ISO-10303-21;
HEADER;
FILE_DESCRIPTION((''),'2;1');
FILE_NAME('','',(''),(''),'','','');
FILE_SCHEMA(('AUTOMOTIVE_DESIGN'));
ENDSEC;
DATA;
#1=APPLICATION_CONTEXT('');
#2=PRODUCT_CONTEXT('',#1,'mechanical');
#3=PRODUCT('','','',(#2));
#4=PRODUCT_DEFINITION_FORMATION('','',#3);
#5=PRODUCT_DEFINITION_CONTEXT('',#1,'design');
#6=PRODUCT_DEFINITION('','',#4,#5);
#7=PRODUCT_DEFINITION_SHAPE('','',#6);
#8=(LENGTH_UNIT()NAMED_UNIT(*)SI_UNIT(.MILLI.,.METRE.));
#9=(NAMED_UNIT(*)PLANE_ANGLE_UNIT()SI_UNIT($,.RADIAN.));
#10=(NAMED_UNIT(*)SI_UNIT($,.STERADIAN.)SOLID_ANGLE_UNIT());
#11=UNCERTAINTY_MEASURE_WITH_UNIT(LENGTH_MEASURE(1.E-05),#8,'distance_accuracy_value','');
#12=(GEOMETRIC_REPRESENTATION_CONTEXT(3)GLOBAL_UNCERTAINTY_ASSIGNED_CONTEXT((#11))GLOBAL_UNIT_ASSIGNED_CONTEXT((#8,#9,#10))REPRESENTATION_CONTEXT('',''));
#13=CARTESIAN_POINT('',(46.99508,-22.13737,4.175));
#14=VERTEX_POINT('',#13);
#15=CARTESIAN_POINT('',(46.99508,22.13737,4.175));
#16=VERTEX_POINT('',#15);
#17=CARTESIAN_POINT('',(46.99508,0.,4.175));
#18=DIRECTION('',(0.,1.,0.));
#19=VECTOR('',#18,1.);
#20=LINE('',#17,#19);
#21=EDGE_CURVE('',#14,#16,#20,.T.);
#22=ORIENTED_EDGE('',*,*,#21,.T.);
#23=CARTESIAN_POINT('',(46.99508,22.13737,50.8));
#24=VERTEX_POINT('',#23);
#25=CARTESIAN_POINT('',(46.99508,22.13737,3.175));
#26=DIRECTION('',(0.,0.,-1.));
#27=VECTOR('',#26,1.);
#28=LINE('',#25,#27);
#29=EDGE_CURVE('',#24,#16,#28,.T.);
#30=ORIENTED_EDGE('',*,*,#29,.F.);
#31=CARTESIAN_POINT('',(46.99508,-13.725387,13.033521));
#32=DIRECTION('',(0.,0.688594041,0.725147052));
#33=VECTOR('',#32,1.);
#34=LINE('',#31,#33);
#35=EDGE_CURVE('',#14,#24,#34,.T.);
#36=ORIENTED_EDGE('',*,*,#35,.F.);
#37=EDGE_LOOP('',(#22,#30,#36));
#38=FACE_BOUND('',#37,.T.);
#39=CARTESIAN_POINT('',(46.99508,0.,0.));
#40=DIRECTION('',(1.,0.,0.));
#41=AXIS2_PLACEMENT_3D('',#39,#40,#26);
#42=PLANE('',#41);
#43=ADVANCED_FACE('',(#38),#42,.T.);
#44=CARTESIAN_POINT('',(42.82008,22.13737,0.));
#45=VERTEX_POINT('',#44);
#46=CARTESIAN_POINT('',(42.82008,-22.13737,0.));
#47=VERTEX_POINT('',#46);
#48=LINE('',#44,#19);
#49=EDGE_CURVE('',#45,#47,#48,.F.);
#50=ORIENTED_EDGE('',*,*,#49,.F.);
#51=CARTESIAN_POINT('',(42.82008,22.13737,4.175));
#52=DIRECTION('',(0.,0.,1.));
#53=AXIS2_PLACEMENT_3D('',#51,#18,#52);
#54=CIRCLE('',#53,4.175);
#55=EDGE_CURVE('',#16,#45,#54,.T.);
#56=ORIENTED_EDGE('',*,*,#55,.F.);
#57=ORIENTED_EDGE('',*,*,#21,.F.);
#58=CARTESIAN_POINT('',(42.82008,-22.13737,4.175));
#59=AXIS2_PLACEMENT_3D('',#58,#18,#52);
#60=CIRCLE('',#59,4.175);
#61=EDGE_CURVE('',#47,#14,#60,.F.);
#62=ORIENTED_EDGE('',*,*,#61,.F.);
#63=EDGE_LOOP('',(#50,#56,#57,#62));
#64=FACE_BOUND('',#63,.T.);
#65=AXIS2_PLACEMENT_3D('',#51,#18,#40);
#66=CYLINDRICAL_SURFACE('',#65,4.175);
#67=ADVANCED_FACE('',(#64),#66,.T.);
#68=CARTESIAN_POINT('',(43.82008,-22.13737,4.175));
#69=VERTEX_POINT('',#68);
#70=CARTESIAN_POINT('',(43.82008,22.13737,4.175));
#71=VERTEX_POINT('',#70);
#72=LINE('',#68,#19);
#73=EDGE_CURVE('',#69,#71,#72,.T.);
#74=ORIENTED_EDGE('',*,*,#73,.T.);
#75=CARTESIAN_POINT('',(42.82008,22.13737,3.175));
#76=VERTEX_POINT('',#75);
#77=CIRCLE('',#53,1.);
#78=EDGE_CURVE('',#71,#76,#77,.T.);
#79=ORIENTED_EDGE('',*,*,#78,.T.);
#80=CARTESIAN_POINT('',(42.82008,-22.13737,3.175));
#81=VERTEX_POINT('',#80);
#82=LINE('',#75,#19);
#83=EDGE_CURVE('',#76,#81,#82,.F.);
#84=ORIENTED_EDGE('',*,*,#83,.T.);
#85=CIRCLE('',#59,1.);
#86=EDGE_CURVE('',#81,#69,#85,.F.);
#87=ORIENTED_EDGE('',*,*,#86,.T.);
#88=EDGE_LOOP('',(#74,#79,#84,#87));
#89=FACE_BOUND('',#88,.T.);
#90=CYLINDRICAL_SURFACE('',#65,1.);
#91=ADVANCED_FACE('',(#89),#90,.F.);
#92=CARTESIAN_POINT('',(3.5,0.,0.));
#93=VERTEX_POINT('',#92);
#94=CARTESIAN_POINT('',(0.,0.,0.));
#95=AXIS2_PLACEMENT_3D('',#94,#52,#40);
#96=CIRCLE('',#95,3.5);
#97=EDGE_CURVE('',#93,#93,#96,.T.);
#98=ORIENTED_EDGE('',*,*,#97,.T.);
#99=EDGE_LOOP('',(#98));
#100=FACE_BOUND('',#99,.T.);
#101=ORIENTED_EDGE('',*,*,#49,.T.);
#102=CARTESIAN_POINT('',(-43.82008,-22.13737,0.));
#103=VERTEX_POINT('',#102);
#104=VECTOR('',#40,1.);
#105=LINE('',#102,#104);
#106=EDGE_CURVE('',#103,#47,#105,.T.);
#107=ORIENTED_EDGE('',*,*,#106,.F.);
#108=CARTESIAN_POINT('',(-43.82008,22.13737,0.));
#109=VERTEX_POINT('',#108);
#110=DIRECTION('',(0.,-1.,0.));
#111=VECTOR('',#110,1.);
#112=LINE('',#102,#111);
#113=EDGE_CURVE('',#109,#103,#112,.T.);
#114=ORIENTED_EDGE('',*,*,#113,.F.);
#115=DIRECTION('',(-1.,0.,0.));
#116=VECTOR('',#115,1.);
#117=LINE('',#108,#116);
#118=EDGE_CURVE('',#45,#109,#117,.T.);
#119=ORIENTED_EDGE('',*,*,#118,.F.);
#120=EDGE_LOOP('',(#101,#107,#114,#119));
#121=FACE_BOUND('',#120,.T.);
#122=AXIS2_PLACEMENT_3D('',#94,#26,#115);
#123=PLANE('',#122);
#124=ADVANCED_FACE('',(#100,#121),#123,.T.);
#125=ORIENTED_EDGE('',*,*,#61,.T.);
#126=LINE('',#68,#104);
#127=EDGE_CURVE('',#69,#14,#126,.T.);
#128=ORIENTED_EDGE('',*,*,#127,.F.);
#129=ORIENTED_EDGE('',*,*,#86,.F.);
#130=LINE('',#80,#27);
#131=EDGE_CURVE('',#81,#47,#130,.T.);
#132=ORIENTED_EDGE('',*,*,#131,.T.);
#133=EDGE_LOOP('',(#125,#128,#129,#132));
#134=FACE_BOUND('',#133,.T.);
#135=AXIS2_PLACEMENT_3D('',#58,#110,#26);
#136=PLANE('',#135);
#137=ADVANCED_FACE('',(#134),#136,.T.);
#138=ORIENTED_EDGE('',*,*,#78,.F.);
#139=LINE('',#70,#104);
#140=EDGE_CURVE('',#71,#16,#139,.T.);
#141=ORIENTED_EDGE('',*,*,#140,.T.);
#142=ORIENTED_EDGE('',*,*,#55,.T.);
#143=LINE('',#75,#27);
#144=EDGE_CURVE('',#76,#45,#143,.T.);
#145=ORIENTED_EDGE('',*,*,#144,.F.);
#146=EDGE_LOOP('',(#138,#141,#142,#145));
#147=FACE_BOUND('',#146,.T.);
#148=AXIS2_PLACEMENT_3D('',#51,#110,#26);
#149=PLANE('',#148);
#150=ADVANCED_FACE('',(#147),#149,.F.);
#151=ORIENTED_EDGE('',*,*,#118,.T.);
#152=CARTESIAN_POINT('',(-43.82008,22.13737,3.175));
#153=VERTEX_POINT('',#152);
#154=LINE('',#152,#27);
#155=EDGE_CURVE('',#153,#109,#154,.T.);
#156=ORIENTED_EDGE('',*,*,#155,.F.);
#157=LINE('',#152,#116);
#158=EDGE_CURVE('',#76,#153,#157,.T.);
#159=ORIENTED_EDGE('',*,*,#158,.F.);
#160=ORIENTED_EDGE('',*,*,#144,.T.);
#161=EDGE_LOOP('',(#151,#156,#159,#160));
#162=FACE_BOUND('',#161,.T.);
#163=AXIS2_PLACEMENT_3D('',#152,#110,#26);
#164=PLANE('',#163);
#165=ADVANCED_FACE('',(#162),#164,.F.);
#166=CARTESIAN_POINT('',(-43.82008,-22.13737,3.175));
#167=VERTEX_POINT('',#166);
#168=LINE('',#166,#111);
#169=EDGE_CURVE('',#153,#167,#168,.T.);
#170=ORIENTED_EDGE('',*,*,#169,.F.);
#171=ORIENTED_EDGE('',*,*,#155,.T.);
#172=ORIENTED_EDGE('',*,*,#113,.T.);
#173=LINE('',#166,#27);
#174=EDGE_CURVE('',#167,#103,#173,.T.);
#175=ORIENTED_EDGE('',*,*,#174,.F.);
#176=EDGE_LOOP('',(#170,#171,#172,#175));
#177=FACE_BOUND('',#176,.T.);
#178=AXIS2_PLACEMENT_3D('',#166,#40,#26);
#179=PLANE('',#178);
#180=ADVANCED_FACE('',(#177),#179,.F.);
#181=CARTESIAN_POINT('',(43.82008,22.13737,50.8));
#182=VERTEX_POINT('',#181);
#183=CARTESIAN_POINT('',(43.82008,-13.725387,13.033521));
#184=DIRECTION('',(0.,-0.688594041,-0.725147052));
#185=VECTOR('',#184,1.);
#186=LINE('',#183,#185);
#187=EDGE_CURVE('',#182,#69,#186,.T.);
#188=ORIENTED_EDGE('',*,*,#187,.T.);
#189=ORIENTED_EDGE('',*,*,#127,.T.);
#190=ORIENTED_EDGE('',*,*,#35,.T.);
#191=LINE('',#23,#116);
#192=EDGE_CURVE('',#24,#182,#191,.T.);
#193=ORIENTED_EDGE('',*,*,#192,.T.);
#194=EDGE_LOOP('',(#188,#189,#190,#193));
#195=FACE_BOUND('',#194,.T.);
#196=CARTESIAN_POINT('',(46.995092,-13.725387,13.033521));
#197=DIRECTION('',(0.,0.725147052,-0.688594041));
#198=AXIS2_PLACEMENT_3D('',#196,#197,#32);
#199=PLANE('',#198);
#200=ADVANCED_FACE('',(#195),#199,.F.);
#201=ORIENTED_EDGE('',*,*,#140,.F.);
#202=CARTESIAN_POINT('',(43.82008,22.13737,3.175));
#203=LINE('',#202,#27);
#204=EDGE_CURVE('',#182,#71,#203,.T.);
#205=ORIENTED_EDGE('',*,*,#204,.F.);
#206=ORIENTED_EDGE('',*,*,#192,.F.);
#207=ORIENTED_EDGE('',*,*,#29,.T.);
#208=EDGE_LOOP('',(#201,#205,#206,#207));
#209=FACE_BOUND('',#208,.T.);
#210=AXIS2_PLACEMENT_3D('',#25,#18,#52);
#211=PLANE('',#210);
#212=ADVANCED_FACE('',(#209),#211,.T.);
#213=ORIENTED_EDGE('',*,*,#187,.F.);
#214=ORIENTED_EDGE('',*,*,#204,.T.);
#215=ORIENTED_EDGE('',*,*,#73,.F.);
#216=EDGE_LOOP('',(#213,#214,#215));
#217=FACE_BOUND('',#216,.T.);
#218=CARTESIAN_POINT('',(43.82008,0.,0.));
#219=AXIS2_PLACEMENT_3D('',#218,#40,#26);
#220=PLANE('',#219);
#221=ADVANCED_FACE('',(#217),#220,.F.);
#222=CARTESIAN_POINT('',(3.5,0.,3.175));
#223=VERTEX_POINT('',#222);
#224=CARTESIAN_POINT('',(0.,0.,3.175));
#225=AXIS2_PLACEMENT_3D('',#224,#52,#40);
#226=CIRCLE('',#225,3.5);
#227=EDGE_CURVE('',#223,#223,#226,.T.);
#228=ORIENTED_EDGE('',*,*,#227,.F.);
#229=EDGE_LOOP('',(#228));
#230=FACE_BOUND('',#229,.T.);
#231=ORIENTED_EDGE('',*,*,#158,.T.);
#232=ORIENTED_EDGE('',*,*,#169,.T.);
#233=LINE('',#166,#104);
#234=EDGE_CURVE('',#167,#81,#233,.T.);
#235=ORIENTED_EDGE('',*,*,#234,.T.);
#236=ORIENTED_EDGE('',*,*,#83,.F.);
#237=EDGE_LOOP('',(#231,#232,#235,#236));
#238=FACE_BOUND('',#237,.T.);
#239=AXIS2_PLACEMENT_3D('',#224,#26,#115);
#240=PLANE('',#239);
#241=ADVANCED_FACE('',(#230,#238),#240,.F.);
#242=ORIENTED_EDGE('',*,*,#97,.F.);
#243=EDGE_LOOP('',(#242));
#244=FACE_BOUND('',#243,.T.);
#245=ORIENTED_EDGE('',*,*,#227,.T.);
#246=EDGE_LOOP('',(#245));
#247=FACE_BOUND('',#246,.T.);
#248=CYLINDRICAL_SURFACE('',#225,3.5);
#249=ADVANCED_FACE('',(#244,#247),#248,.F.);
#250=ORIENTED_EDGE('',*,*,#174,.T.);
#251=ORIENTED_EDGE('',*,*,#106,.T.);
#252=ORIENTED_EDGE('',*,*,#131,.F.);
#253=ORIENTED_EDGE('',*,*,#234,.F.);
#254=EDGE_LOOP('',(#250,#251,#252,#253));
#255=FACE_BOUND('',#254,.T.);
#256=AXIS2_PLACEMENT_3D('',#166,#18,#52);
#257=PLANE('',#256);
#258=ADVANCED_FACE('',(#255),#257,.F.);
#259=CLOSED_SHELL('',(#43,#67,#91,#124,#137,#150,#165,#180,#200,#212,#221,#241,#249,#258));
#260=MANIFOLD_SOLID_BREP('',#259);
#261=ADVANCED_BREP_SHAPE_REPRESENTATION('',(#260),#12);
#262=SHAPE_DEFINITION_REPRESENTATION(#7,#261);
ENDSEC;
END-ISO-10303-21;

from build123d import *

# Parameters (mm, degrees)
SKETCH1_W                    = 87.64016
SKETCH1_H                    = 44.27474
SKETCH1_R                    = 3
BASE_FLANGE1_DEPTH           = 3.175
EDGE_FLANGE2_STRIP_W         = 14.7
EDGE_FLANGE2_STRIP_H         = 3.175
EDGE_FLANGE2_STRIP_CUT_DEPTH = 44.27474
EDGE_FLANGE2_DEPTH           = 44.27474
CUT_EXTRUDE2_DEPTH           = 107.386542553
CUT_EXTRUDE2_DEPTH_BACK      = 3.175
M6_CLEARANCE_HOLE2_D         = 7
M6_CLEARANCE_HOLE2_DEPTH     = 3.175


# Sheet-metal steps are written as plain solids
with BuildPart() as part:
    # Sketch1 → Base-Flange1 (new body)
    with BuildSketch(Plane.XY):
        Rectangle(SKETCH1_W, SKETCH1_H)
        Circle(SKETCH1_R, mode=Mode.SUBTRACT)
    extrude(amount=BASE_FLANGE1_DEPTH)

    # Edge-Flange2 strip (across the edge) → Edge-Flange2 strip cut (cut)
    with BuildSketch(Plane(origin=(43.82008, -22.13737, 3.175), x_dir=(-1, 0, 0), z_dir=(0, 1, 0))):
        with Locations((-6.35, -1.5875)):
            Rectangle(EDGE_FLANGE2_STRIP_W, EDGE_FLANGE2_STRIP_H)
    extrude(amount=EDGE_FLANGE2_STRIP_CUT_DEPTH, mode=Mode.SUBTRACT)

    # Edge-Flange2 section (across the edge) → Edge-Flange2 (add)
    with BuildSketch(Plane(origin=(43.82008, -22.13737, 3.175), x_dir=(-1, 0, 0), z_dir=(0, 1, 0))):
        with BuildLine():
            Line((-3.175, 1), (-3.175, 47.625))
            Line((-3.175, 47.625), (0, 47.625))
            Line((0, 47.625), (0, 1))
            ThreePointArc((0, 1), (0.292893219, 0.292893219), (1, 0))
            Line((1, 0), (1, -3.175))
            ThreePointArc((1, -3.175), (-1.952170811, -1.952170811), (-3.175, 1))
        make_face()
    extrude(amount=EDGE_FLANGE2_DEPTH)

    # Sketch13 → Cut-Extrude2 (cut, two sides: drawn at the far end of the back side and taken through both)
    with BuildSketch(Plane(origin=(46.99508, 0, 0), x_dir=(0, 0, -1), z_dir=(1, 0, 0)).offset(-CUT_EXTRUDE2_DEPTH_BACK)):
        Polygon((-4.175, -22.13737), (-50.8, 22.13737), (-50.8, -22.13737), align=None)
    extrude(amount=CUT_EXTRUDE2_DEPTH + CUT_EXTRUDE2_DEPTH_BACK, mode=Mode.SUBTRACT)

    # M6 Clearance Hole2
    with Locations(Plane.XY.offset(3.175)):
        with Locations((0, 0)):
            Hole(M6_CLEARANCE_HOLE2_D / 2, depth=M6_CLEARANCE_HOLE2_DEPTH)


solid = part.part
